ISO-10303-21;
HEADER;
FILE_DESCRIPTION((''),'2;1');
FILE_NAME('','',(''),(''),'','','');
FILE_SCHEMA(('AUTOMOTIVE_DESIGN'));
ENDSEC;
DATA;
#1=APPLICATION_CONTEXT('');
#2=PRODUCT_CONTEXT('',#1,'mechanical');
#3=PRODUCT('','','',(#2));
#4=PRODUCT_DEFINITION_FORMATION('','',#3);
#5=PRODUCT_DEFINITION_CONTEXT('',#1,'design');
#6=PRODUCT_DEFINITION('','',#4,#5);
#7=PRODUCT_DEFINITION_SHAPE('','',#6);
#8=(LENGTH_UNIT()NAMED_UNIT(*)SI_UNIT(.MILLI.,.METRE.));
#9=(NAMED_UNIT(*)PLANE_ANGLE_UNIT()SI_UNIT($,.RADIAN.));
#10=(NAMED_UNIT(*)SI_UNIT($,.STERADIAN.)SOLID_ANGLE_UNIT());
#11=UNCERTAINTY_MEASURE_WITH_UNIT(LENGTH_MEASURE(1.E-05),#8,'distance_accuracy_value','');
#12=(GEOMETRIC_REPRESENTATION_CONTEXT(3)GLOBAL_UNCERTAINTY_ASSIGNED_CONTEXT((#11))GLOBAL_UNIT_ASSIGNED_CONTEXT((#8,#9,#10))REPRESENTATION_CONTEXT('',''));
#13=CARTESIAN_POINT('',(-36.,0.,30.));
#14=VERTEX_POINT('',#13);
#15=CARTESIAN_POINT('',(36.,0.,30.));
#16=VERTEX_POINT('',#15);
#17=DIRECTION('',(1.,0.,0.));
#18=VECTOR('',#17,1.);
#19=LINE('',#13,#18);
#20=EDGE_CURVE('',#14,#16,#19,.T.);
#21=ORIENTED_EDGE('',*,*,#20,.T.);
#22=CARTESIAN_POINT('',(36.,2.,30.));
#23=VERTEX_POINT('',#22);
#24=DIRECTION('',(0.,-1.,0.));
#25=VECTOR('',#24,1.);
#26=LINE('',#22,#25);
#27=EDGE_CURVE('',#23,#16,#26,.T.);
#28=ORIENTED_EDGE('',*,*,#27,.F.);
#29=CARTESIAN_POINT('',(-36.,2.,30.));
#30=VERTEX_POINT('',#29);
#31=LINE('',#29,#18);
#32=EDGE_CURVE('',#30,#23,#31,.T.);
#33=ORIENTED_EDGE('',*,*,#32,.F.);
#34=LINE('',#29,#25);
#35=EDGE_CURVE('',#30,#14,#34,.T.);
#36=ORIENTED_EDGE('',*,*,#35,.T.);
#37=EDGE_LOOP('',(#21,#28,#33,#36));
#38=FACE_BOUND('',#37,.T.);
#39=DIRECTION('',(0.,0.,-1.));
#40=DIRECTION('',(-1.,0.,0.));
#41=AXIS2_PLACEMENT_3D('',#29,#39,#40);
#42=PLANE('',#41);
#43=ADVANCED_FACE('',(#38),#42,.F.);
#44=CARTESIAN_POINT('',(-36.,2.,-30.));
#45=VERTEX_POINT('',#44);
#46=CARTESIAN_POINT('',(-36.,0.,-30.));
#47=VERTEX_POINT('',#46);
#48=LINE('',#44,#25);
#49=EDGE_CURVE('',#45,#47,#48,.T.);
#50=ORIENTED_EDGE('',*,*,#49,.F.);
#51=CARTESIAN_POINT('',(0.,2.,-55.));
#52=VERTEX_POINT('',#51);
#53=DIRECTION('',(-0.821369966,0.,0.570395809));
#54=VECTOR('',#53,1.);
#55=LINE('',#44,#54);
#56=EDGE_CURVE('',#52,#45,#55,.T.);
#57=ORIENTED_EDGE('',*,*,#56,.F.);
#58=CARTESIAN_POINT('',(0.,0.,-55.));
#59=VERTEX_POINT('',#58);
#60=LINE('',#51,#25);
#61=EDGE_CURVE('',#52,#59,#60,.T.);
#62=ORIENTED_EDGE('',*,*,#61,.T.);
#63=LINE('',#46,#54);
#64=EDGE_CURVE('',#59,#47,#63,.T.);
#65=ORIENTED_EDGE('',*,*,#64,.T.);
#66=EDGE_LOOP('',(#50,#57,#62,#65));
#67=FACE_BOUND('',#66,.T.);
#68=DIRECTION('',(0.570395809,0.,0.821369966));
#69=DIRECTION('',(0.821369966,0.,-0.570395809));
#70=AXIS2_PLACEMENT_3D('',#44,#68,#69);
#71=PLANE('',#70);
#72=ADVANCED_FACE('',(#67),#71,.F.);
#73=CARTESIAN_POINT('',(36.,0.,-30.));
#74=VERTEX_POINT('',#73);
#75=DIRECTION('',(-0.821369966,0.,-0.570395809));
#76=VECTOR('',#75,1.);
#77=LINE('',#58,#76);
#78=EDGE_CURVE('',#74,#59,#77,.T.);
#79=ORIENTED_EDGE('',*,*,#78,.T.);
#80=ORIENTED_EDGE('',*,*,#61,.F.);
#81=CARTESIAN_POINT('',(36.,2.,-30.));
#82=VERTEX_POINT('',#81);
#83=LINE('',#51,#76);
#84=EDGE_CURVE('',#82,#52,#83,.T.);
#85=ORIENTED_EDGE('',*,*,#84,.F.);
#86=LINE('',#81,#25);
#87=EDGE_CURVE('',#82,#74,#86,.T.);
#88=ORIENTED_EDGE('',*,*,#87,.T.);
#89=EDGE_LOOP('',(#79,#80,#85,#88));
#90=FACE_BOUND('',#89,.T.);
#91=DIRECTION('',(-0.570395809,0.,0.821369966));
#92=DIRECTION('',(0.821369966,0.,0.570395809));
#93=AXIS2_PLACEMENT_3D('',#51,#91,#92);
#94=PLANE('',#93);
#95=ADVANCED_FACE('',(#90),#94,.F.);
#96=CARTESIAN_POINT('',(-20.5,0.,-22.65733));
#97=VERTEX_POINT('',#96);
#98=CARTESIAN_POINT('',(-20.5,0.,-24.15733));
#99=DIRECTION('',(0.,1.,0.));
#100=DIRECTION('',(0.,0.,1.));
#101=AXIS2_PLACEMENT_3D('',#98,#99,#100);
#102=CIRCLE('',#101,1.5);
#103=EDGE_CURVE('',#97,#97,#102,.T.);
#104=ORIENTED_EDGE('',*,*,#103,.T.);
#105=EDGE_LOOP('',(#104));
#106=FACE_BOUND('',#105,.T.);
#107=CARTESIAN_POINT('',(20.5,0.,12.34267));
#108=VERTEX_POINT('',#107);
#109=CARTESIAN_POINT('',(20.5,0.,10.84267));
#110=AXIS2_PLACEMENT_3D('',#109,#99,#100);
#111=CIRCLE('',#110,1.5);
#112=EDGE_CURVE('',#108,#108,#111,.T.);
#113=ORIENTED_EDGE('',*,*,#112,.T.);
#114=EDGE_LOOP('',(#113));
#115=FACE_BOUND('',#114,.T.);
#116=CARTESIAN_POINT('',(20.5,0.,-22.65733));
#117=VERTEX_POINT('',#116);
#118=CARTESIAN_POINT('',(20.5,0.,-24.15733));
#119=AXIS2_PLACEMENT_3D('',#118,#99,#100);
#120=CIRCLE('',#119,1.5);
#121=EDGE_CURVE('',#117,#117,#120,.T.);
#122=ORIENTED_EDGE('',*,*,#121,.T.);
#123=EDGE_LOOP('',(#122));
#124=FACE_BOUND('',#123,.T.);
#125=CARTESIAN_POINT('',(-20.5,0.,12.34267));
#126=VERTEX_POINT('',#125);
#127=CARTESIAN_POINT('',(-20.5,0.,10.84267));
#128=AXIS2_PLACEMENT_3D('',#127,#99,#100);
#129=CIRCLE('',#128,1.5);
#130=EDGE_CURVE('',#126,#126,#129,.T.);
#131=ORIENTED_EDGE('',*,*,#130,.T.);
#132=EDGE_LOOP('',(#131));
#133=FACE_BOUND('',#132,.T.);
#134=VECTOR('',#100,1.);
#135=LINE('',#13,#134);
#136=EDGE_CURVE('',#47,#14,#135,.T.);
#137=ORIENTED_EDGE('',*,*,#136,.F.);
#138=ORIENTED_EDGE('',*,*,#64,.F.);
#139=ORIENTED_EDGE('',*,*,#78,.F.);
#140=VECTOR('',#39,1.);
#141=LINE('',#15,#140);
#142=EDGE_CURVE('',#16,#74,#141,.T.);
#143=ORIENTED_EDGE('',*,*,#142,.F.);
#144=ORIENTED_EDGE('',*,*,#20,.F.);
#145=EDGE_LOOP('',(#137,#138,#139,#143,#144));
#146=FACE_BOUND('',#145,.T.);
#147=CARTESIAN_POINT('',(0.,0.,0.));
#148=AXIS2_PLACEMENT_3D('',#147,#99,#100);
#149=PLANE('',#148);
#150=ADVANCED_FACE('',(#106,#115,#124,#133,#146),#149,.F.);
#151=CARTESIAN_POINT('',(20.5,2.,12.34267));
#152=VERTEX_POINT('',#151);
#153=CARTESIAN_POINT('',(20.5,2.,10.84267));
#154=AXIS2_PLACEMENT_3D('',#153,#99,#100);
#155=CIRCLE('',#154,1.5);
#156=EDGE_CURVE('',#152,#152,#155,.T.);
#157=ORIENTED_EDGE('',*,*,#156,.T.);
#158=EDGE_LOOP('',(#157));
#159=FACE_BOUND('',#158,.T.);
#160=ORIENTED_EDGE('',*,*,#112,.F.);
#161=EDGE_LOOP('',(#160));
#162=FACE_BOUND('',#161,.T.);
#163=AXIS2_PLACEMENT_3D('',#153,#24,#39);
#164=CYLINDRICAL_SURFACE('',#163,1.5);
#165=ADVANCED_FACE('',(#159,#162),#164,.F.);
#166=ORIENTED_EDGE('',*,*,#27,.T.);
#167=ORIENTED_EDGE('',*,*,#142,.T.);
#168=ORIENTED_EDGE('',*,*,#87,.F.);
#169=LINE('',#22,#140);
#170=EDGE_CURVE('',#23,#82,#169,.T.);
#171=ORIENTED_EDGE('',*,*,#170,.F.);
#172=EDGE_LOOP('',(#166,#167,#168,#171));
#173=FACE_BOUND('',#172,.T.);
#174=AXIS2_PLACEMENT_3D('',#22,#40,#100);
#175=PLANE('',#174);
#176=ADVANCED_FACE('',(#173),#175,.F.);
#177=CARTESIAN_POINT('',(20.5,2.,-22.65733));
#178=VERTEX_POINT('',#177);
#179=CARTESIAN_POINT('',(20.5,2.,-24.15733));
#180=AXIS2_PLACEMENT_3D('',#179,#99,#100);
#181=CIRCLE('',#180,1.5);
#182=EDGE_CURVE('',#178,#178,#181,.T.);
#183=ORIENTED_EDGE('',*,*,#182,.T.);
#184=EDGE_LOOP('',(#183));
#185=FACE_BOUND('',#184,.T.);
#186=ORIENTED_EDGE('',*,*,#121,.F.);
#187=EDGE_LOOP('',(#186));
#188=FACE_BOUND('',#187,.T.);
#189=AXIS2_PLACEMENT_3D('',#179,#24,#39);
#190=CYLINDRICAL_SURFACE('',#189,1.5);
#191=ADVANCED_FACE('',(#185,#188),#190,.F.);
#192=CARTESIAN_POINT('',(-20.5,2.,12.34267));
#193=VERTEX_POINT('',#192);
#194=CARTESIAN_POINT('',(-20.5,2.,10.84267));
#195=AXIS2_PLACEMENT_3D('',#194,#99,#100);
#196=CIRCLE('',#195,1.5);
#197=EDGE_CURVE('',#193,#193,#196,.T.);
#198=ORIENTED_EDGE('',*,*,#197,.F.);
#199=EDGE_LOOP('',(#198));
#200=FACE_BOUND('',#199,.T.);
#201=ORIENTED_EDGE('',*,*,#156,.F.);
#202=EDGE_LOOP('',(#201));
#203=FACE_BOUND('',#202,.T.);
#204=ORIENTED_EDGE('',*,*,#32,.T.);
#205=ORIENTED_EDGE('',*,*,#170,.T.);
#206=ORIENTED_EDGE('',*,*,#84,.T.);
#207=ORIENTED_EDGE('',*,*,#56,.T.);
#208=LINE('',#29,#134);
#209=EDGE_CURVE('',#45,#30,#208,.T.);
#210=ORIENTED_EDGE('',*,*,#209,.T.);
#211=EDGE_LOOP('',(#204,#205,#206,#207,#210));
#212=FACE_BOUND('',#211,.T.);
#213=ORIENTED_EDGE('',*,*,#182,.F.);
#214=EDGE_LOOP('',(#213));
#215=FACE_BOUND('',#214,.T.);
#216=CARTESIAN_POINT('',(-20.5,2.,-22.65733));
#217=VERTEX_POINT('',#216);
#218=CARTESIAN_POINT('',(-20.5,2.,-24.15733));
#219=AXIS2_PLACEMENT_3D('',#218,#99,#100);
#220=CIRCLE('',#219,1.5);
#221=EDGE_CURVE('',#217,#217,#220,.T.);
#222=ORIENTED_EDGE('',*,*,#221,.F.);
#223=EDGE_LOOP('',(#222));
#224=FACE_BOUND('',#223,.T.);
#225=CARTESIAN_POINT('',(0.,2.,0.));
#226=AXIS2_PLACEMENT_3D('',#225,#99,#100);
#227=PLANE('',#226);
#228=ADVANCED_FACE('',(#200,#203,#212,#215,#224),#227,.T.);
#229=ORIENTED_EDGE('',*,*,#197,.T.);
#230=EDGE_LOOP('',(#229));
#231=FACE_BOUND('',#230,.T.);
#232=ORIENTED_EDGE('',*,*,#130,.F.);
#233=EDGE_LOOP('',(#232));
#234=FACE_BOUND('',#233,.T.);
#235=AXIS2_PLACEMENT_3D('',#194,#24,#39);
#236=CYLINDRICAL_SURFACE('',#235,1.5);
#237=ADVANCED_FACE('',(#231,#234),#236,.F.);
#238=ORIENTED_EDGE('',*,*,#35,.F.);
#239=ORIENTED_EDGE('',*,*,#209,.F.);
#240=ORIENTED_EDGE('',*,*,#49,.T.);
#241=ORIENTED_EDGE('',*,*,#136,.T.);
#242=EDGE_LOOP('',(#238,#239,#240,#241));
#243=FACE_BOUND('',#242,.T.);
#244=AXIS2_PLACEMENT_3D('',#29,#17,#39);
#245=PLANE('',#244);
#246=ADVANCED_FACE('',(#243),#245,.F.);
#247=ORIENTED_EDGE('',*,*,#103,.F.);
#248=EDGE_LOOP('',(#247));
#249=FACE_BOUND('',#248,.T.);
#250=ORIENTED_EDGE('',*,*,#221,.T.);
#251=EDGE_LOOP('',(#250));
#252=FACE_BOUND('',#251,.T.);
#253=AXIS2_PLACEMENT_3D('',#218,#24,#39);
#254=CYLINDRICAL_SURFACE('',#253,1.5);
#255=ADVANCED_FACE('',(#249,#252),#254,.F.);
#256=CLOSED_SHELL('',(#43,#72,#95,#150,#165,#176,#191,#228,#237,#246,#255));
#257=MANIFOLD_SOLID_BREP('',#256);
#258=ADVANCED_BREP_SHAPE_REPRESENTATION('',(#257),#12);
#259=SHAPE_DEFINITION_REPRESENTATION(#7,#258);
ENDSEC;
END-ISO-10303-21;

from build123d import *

# Parameters (mm, degrees)
SKETCH1_R           = 1.5
BOSS_EXTRUDE1_DEPTH = 2


with BuildPart() as part:
    # Sketch1 → Boss-Extrude1 (new body)
    with BuildSketch(Plane(origin=(0, 0, 0), x_dir=(1, 0, 0), z_dir=(0, 1, 0))):
        Polygon((-36, -30), (-36, 30), (0, 55), (36, 30), (36, -30), align=None)
        with Locations((-20.5, 24.157329938)):
            Circle(SKETCH1_R, mode=Mode.SUBTRACT)
        with Locations((20.5, 24.157329938)):
            Circle(SKETCH1_R, mode=Mode.SUBTRACT)
        with Locations((20.5, -10.842670062)):
            Circle(SKETCH1_R, mode=Mode.SUBTRACT)
        with Locations((-20.5, -10.842670062)):
            Circle(SKETCH1_R, mode=Mode.SUBTRACT)
    extrude(amount=BOSS_EXTRUDE1_DEPTH)


solid = part.part
